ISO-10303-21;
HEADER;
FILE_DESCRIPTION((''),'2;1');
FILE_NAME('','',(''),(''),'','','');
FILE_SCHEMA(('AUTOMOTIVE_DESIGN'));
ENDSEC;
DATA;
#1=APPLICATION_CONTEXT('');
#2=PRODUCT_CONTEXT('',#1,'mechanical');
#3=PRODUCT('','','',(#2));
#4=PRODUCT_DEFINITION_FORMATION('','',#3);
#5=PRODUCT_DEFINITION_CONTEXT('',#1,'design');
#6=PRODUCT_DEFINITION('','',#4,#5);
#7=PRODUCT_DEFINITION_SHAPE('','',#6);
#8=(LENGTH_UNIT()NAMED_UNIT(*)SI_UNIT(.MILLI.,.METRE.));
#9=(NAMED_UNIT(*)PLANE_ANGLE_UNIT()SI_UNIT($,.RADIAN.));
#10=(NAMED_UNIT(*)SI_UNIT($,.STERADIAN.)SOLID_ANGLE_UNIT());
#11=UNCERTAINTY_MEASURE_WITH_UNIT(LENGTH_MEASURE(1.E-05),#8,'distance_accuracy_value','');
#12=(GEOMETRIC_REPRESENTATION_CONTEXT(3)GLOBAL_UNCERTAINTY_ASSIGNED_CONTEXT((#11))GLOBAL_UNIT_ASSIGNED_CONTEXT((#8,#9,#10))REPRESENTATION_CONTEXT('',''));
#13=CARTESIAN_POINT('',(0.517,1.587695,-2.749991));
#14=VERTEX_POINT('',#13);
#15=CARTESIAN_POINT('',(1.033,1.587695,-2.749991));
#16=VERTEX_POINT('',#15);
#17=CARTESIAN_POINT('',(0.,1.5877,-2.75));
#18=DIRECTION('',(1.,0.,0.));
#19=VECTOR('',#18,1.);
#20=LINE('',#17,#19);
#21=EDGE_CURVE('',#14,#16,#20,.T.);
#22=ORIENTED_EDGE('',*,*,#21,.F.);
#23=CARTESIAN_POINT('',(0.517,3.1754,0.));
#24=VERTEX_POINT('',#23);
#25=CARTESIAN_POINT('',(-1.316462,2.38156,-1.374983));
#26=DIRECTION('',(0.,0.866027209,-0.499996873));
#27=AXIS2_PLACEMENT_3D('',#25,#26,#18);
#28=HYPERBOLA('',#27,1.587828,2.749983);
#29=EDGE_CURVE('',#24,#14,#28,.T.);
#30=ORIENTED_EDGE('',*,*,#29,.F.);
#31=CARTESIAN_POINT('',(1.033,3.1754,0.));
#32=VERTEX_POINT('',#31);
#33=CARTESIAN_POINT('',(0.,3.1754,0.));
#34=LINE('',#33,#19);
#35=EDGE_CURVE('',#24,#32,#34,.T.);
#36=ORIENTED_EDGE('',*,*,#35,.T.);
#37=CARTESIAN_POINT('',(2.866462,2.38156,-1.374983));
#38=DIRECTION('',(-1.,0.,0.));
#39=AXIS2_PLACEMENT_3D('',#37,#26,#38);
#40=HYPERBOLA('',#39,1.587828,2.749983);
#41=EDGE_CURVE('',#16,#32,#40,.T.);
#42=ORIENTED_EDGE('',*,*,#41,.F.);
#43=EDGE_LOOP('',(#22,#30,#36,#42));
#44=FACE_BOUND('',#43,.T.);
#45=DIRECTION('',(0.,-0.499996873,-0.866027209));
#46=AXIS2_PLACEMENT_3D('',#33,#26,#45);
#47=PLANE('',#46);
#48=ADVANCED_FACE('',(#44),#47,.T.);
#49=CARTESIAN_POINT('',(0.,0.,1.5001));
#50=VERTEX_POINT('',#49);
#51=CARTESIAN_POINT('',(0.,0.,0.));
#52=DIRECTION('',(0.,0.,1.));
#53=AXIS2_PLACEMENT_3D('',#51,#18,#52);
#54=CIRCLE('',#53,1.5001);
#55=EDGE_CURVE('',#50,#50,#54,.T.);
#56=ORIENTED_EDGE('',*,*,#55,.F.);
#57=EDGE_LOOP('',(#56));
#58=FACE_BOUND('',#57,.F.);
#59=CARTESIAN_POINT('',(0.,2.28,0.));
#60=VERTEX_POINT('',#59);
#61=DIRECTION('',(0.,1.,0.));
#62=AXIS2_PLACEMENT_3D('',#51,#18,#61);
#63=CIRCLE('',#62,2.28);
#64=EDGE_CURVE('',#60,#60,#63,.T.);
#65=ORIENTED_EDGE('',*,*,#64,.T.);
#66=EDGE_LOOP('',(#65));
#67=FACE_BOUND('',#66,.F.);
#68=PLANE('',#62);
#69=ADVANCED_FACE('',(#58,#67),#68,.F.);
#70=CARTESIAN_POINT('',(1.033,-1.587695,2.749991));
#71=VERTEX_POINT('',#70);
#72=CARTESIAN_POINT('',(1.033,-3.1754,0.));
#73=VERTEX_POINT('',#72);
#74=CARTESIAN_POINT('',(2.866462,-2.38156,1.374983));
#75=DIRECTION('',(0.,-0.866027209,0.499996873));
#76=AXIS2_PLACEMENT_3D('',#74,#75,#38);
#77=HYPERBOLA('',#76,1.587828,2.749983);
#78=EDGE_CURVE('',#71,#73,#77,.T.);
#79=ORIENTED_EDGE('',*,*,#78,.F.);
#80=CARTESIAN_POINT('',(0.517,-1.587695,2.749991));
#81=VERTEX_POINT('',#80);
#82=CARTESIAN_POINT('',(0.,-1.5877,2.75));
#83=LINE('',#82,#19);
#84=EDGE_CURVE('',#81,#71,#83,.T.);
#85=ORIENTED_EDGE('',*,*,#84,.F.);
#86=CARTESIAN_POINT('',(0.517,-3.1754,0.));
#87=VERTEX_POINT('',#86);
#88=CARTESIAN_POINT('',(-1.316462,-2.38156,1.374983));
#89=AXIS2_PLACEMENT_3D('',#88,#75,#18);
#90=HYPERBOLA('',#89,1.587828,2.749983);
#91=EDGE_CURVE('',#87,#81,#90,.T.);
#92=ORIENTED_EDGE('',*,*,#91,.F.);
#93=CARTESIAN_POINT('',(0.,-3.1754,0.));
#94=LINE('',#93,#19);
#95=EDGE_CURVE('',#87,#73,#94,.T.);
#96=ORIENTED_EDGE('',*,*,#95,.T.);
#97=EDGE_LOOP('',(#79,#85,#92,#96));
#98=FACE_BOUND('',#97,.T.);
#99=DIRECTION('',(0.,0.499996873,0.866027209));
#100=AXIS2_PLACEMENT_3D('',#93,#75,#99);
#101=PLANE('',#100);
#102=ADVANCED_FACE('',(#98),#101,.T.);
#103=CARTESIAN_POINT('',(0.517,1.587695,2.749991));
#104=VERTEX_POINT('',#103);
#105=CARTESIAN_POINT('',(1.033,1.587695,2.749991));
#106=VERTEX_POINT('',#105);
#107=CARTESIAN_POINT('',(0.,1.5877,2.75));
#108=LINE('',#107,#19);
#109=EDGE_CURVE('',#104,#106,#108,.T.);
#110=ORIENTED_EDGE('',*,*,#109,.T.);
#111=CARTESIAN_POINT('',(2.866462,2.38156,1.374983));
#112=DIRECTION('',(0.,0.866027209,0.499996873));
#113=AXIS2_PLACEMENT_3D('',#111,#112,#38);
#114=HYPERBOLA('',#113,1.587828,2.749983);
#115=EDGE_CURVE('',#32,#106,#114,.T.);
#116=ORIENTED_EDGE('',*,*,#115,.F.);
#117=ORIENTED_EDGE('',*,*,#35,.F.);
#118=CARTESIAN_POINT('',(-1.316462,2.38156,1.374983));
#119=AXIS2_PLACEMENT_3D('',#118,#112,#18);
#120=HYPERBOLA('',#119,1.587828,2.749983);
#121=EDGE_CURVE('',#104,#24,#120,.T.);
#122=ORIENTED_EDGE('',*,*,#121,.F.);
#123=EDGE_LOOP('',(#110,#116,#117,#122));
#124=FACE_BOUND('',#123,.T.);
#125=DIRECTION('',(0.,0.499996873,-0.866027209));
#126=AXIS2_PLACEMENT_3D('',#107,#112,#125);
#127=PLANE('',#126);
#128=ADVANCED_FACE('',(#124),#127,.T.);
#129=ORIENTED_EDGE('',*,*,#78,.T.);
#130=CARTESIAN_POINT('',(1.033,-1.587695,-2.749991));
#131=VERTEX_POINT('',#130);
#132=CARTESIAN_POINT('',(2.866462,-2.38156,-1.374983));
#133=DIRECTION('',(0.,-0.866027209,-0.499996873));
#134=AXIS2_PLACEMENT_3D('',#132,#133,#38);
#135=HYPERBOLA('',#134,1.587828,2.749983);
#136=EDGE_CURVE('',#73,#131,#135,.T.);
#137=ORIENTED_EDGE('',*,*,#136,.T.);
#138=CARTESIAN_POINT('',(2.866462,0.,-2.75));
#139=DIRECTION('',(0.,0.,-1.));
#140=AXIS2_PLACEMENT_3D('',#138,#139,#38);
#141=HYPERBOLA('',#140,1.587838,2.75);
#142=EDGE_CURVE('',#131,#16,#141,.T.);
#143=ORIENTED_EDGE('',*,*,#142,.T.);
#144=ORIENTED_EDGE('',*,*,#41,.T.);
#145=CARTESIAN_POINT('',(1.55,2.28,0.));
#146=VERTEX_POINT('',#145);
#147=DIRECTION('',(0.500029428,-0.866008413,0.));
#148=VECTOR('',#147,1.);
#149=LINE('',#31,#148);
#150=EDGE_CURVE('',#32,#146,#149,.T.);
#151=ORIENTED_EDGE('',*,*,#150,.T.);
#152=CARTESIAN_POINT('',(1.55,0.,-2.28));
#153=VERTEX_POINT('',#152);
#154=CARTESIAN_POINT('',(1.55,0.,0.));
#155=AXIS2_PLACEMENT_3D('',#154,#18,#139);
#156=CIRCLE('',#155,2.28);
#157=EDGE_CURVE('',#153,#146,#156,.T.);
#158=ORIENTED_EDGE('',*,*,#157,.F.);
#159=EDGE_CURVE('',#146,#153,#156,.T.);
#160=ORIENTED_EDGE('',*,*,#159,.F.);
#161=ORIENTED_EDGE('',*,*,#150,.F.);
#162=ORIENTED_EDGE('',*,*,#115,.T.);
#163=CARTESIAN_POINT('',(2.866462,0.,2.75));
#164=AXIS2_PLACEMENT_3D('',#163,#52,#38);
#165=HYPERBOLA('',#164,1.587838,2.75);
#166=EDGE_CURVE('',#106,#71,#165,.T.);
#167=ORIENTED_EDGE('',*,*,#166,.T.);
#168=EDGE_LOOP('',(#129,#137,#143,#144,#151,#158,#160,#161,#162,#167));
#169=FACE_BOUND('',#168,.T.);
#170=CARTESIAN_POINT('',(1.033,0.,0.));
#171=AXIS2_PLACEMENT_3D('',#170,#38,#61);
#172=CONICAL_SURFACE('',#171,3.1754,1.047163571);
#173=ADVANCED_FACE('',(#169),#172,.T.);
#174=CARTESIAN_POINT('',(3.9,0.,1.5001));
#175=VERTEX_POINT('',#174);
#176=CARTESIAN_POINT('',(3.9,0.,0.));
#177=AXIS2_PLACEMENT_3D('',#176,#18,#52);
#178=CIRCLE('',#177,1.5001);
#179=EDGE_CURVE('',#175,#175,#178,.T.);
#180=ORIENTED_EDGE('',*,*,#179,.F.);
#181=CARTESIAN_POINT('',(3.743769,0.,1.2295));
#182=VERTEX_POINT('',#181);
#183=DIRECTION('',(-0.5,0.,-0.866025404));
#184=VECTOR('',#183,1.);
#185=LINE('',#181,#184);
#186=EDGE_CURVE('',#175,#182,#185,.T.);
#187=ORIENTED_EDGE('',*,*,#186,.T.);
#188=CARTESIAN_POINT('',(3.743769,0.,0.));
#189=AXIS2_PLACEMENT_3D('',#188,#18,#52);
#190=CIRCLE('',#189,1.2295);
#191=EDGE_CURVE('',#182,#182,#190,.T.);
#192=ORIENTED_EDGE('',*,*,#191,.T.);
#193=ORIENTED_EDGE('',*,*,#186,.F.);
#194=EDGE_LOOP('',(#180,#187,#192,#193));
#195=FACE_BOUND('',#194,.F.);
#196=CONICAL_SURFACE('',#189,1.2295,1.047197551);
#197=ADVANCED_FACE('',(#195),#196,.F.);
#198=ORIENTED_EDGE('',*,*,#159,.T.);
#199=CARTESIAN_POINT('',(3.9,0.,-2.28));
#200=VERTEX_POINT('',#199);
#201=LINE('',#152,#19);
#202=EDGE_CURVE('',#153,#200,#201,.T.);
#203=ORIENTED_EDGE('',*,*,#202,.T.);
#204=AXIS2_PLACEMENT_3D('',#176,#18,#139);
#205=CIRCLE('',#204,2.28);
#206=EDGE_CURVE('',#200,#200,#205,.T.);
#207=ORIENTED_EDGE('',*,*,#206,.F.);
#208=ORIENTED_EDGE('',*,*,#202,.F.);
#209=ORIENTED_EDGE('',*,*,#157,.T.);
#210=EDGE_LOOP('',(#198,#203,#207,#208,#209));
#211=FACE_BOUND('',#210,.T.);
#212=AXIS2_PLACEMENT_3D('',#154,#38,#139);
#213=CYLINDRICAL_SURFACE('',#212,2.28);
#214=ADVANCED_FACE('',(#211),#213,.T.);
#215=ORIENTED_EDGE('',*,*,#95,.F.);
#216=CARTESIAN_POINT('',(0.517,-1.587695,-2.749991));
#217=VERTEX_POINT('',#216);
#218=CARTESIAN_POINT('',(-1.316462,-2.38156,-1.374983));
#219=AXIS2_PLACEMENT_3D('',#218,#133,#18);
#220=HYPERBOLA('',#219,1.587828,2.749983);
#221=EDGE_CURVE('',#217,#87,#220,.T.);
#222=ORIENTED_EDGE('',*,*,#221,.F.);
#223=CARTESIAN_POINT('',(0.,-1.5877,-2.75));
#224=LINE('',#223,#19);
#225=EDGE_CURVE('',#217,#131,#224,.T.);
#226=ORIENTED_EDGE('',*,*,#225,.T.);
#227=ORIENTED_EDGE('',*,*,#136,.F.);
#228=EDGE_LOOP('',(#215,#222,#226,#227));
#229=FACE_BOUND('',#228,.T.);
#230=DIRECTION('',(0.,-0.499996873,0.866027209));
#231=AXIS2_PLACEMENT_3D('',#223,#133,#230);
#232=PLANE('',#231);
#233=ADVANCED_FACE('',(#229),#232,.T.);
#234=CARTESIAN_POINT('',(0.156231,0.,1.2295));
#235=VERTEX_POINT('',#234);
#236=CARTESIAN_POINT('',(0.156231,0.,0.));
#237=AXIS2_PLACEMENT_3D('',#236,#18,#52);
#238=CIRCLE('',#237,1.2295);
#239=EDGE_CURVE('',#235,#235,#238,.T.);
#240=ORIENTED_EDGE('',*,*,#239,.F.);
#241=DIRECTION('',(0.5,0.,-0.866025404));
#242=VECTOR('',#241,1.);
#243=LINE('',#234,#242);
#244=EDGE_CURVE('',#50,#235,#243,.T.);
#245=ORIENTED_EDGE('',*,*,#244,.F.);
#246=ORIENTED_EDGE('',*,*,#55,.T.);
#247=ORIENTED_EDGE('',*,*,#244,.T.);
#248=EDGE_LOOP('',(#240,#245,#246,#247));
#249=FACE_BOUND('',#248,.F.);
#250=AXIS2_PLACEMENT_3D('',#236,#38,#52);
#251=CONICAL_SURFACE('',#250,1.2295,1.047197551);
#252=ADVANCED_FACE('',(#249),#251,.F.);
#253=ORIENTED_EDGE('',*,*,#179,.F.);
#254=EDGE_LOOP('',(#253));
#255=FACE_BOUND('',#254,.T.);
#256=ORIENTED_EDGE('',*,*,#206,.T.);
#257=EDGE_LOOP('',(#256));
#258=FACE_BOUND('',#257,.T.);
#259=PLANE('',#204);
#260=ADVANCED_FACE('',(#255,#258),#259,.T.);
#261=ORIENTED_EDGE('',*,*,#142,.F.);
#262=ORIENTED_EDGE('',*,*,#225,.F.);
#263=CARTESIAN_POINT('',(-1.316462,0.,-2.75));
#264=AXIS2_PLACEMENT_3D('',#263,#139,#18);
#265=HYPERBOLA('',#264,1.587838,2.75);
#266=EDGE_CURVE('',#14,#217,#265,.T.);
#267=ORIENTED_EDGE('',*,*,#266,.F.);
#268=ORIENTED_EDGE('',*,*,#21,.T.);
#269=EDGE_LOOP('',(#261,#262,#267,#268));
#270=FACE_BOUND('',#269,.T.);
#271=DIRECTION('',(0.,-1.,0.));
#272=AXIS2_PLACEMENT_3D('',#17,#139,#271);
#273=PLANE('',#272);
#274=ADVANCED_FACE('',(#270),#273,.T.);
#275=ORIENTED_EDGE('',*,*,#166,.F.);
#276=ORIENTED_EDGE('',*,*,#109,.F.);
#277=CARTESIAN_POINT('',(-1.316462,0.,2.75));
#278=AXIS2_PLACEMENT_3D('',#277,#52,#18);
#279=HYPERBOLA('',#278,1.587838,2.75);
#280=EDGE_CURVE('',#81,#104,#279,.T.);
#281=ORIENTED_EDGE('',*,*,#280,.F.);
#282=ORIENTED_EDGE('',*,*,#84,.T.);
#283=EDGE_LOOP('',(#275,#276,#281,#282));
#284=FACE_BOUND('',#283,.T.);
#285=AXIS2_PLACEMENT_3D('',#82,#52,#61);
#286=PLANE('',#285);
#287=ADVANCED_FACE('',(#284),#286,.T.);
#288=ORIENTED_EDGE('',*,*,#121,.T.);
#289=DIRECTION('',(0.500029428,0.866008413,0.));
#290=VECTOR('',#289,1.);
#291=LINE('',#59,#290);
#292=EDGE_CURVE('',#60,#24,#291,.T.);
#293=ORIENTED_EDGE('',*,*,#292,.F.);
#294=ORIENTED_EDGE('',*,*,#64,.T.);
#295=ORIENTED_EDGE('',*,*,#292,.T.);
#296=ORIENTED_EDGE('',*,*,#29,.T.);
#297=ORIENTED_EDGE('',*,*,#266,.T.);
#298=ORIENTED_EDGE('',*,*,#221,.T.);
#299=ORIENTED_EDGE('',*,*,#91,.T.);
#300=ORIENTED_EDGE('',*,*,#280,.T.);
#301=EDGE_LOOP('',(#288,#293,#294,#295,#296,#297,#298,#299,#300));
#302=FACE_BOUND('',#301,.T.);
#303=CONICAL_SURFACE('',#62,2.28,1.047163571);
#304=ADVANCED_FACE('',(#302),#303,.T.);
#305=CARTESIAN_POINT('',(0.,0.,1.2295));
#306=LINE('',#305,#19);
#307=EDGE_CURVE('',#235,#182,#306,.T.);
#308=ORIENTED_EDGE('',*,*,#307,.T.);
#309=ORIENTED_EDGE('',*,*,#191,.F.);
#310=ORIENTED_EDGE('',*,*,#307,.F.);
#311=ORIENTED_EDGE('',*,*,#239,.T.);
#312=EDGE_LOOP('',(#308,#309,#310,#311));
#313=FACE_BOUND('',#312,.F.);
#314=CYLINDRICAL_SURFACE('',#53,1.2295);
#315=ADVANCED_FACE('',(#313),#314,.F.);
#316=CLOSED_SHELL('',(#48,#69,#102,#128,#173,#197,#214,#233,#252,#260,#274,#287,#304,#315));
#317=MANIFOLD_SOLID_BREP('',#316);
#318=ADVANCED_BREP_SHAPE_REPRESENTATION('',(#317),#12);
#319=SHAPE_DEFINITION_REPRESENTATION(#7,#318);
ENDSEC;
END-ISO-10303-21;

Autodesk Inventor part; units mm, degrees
ref_plane "YZ Plane" through (0, 0, 0) normal (1, 0, 0) x (0, 1, 0)
ref_plane "XZ Plane" through (0, 0, 0) normal (0, 1, 0) x (-1, 0, 0)
sketch "Skizze1" plane through (0, 0, 0) normal (1, 0, 0) x (0, 1, 0)
  line L0 (1.5877, -2.75) -> (-1.5877, -2.75)
  line L1 (-1.5877, -2.75) -> (-3.1754, 0)
  line L2 (-3.1754, 0) -> (-1.5877, 2.75)
  line L3 (-1.5877, 2.75) -> (1.5877, 2.75)
  line L4 (1.5877, 2.75) -> (3.1754, 0)
  line L5 (3.1754, 0) -> (1.5877, -2.75)
  point P0 (0, 0)
  point P1 (0, 0)
  dimension "d0" = 6.3509
extrude "Körper" add sketch "Skizze1" along normal blind 1.55
sketch "Skizze2" plane through (1.55, 0, 0) normal (1, 0, 0) x (0, 0, -1)
  circle A0 centre (0, 0) radius 2.28
  dimension "d7" = 4.56
extrude "Ring" add sketch "Skizze2" along normal blind 2.35
sketch "Skizze3" plane through (0, 0, 0) normal (0, 0, 1) x (1, 0, 0)
  line L0 (0, 1.5877) -> (0, 3.1754) projected
  line L1 (0, 3.1754) -> (1.55, 3.1754) projected
  line L2 (1.55, 1.5877) -> (1.55, 3.1754) projected
  line L3 (-0.31, 0) -> (1.86, 0) projected
  line L4 (0, 2.28) -> (0.517, 3.1754)
  line L5 (1.033, 3.1754) -> (1.55, 2.28)
  dimension "d3" = 30
  dimension "d4" = 30
  dimension "d5" = 4.56
  dimension "d6" = 4.56
revolve "Fase1" cut sketch "Skizze3" angle 360 about axis through (-10, 0, 0) along (1, 0, 0)
sketch "Skizze4" plane through (0, 0, 0) normal (-1, 0, 0) x (0, 0, 1)
  line L0 (0, -4.4456) -> (0, 4.4456) projected
  line L1 (-3.85, 0) -> (3.85, 0) projected
  point P0 (0, 0)
hole "Gewinde" at (0, 0, 0) direction (1, 0, 0) diameter 2.459 end through all thread size "M3x0.5" class "6H" standard "ISO Metric profile"
chamfer "Fase2" distance 0.2706 angle 30 1 edges at (0, 0, -1.2295) measured on face at (0, 1.9048, -0.2313)
chamfer "Fase3" distance 0.2706 angle 30 1 edges at (3.9, 0, -1.2295) measured on face at (3.9, -0.28, -1.8958)
ref_plane "Work Plane1" through (9.2625, 0, 0) normal (0, 0, 1) x (-1, 0, 0)
equation "\"d0\" = 1.1547 * SW"
equation "\"d1\" = KOH1"
equation "\"d7\" = SD2"
equation "\"d8\" = KOH - KOH1"
equation "\"d3\" = ANG1"
equation "\"d4\" = ANG2"
equation "\"d5\" = SW0"
equation "\"d6\" = SW01"
equation "\"d10\" = -0.5 * GD1 + 0.5 * NND"
equation "\"d46\" = -0.5 * GD1 + 0.5 * NND"
equation "\"d12\" = -0.5 * GD1 + 0.5 * NND"
equation "\"d47\" = -0.5 * GD1 + 0.5 * NND"
equation "\"ANG1\" = 30deg"
equation "\"ANG2\" = 30deg"
equation "\"NND\" = 3"
equation "\"KOH1\" = 1.55"
equation "\"KOH\" = 3.9"
equation "\"SW\" = 5.5"
equation "\"SW0\" = 4.56"
equation "\"SW01\" = SW0"
equation "\"SD2\" = SW0"
equation "\"GUL\" = 0.541266 * PTC"
equation "\"THREADDIA\" = 3"
equation "\"TOA\" = 30deg"
equation "\"PTC\" = 0.5"
equation "\"E0\" = 1.155 * SW"
equation "\"GAL\" = 0.541266 * PTC"
equation "\"GD1\" = 2.458734"
properties part number "ISO 10511 - M3" material "Stahl, weich"
